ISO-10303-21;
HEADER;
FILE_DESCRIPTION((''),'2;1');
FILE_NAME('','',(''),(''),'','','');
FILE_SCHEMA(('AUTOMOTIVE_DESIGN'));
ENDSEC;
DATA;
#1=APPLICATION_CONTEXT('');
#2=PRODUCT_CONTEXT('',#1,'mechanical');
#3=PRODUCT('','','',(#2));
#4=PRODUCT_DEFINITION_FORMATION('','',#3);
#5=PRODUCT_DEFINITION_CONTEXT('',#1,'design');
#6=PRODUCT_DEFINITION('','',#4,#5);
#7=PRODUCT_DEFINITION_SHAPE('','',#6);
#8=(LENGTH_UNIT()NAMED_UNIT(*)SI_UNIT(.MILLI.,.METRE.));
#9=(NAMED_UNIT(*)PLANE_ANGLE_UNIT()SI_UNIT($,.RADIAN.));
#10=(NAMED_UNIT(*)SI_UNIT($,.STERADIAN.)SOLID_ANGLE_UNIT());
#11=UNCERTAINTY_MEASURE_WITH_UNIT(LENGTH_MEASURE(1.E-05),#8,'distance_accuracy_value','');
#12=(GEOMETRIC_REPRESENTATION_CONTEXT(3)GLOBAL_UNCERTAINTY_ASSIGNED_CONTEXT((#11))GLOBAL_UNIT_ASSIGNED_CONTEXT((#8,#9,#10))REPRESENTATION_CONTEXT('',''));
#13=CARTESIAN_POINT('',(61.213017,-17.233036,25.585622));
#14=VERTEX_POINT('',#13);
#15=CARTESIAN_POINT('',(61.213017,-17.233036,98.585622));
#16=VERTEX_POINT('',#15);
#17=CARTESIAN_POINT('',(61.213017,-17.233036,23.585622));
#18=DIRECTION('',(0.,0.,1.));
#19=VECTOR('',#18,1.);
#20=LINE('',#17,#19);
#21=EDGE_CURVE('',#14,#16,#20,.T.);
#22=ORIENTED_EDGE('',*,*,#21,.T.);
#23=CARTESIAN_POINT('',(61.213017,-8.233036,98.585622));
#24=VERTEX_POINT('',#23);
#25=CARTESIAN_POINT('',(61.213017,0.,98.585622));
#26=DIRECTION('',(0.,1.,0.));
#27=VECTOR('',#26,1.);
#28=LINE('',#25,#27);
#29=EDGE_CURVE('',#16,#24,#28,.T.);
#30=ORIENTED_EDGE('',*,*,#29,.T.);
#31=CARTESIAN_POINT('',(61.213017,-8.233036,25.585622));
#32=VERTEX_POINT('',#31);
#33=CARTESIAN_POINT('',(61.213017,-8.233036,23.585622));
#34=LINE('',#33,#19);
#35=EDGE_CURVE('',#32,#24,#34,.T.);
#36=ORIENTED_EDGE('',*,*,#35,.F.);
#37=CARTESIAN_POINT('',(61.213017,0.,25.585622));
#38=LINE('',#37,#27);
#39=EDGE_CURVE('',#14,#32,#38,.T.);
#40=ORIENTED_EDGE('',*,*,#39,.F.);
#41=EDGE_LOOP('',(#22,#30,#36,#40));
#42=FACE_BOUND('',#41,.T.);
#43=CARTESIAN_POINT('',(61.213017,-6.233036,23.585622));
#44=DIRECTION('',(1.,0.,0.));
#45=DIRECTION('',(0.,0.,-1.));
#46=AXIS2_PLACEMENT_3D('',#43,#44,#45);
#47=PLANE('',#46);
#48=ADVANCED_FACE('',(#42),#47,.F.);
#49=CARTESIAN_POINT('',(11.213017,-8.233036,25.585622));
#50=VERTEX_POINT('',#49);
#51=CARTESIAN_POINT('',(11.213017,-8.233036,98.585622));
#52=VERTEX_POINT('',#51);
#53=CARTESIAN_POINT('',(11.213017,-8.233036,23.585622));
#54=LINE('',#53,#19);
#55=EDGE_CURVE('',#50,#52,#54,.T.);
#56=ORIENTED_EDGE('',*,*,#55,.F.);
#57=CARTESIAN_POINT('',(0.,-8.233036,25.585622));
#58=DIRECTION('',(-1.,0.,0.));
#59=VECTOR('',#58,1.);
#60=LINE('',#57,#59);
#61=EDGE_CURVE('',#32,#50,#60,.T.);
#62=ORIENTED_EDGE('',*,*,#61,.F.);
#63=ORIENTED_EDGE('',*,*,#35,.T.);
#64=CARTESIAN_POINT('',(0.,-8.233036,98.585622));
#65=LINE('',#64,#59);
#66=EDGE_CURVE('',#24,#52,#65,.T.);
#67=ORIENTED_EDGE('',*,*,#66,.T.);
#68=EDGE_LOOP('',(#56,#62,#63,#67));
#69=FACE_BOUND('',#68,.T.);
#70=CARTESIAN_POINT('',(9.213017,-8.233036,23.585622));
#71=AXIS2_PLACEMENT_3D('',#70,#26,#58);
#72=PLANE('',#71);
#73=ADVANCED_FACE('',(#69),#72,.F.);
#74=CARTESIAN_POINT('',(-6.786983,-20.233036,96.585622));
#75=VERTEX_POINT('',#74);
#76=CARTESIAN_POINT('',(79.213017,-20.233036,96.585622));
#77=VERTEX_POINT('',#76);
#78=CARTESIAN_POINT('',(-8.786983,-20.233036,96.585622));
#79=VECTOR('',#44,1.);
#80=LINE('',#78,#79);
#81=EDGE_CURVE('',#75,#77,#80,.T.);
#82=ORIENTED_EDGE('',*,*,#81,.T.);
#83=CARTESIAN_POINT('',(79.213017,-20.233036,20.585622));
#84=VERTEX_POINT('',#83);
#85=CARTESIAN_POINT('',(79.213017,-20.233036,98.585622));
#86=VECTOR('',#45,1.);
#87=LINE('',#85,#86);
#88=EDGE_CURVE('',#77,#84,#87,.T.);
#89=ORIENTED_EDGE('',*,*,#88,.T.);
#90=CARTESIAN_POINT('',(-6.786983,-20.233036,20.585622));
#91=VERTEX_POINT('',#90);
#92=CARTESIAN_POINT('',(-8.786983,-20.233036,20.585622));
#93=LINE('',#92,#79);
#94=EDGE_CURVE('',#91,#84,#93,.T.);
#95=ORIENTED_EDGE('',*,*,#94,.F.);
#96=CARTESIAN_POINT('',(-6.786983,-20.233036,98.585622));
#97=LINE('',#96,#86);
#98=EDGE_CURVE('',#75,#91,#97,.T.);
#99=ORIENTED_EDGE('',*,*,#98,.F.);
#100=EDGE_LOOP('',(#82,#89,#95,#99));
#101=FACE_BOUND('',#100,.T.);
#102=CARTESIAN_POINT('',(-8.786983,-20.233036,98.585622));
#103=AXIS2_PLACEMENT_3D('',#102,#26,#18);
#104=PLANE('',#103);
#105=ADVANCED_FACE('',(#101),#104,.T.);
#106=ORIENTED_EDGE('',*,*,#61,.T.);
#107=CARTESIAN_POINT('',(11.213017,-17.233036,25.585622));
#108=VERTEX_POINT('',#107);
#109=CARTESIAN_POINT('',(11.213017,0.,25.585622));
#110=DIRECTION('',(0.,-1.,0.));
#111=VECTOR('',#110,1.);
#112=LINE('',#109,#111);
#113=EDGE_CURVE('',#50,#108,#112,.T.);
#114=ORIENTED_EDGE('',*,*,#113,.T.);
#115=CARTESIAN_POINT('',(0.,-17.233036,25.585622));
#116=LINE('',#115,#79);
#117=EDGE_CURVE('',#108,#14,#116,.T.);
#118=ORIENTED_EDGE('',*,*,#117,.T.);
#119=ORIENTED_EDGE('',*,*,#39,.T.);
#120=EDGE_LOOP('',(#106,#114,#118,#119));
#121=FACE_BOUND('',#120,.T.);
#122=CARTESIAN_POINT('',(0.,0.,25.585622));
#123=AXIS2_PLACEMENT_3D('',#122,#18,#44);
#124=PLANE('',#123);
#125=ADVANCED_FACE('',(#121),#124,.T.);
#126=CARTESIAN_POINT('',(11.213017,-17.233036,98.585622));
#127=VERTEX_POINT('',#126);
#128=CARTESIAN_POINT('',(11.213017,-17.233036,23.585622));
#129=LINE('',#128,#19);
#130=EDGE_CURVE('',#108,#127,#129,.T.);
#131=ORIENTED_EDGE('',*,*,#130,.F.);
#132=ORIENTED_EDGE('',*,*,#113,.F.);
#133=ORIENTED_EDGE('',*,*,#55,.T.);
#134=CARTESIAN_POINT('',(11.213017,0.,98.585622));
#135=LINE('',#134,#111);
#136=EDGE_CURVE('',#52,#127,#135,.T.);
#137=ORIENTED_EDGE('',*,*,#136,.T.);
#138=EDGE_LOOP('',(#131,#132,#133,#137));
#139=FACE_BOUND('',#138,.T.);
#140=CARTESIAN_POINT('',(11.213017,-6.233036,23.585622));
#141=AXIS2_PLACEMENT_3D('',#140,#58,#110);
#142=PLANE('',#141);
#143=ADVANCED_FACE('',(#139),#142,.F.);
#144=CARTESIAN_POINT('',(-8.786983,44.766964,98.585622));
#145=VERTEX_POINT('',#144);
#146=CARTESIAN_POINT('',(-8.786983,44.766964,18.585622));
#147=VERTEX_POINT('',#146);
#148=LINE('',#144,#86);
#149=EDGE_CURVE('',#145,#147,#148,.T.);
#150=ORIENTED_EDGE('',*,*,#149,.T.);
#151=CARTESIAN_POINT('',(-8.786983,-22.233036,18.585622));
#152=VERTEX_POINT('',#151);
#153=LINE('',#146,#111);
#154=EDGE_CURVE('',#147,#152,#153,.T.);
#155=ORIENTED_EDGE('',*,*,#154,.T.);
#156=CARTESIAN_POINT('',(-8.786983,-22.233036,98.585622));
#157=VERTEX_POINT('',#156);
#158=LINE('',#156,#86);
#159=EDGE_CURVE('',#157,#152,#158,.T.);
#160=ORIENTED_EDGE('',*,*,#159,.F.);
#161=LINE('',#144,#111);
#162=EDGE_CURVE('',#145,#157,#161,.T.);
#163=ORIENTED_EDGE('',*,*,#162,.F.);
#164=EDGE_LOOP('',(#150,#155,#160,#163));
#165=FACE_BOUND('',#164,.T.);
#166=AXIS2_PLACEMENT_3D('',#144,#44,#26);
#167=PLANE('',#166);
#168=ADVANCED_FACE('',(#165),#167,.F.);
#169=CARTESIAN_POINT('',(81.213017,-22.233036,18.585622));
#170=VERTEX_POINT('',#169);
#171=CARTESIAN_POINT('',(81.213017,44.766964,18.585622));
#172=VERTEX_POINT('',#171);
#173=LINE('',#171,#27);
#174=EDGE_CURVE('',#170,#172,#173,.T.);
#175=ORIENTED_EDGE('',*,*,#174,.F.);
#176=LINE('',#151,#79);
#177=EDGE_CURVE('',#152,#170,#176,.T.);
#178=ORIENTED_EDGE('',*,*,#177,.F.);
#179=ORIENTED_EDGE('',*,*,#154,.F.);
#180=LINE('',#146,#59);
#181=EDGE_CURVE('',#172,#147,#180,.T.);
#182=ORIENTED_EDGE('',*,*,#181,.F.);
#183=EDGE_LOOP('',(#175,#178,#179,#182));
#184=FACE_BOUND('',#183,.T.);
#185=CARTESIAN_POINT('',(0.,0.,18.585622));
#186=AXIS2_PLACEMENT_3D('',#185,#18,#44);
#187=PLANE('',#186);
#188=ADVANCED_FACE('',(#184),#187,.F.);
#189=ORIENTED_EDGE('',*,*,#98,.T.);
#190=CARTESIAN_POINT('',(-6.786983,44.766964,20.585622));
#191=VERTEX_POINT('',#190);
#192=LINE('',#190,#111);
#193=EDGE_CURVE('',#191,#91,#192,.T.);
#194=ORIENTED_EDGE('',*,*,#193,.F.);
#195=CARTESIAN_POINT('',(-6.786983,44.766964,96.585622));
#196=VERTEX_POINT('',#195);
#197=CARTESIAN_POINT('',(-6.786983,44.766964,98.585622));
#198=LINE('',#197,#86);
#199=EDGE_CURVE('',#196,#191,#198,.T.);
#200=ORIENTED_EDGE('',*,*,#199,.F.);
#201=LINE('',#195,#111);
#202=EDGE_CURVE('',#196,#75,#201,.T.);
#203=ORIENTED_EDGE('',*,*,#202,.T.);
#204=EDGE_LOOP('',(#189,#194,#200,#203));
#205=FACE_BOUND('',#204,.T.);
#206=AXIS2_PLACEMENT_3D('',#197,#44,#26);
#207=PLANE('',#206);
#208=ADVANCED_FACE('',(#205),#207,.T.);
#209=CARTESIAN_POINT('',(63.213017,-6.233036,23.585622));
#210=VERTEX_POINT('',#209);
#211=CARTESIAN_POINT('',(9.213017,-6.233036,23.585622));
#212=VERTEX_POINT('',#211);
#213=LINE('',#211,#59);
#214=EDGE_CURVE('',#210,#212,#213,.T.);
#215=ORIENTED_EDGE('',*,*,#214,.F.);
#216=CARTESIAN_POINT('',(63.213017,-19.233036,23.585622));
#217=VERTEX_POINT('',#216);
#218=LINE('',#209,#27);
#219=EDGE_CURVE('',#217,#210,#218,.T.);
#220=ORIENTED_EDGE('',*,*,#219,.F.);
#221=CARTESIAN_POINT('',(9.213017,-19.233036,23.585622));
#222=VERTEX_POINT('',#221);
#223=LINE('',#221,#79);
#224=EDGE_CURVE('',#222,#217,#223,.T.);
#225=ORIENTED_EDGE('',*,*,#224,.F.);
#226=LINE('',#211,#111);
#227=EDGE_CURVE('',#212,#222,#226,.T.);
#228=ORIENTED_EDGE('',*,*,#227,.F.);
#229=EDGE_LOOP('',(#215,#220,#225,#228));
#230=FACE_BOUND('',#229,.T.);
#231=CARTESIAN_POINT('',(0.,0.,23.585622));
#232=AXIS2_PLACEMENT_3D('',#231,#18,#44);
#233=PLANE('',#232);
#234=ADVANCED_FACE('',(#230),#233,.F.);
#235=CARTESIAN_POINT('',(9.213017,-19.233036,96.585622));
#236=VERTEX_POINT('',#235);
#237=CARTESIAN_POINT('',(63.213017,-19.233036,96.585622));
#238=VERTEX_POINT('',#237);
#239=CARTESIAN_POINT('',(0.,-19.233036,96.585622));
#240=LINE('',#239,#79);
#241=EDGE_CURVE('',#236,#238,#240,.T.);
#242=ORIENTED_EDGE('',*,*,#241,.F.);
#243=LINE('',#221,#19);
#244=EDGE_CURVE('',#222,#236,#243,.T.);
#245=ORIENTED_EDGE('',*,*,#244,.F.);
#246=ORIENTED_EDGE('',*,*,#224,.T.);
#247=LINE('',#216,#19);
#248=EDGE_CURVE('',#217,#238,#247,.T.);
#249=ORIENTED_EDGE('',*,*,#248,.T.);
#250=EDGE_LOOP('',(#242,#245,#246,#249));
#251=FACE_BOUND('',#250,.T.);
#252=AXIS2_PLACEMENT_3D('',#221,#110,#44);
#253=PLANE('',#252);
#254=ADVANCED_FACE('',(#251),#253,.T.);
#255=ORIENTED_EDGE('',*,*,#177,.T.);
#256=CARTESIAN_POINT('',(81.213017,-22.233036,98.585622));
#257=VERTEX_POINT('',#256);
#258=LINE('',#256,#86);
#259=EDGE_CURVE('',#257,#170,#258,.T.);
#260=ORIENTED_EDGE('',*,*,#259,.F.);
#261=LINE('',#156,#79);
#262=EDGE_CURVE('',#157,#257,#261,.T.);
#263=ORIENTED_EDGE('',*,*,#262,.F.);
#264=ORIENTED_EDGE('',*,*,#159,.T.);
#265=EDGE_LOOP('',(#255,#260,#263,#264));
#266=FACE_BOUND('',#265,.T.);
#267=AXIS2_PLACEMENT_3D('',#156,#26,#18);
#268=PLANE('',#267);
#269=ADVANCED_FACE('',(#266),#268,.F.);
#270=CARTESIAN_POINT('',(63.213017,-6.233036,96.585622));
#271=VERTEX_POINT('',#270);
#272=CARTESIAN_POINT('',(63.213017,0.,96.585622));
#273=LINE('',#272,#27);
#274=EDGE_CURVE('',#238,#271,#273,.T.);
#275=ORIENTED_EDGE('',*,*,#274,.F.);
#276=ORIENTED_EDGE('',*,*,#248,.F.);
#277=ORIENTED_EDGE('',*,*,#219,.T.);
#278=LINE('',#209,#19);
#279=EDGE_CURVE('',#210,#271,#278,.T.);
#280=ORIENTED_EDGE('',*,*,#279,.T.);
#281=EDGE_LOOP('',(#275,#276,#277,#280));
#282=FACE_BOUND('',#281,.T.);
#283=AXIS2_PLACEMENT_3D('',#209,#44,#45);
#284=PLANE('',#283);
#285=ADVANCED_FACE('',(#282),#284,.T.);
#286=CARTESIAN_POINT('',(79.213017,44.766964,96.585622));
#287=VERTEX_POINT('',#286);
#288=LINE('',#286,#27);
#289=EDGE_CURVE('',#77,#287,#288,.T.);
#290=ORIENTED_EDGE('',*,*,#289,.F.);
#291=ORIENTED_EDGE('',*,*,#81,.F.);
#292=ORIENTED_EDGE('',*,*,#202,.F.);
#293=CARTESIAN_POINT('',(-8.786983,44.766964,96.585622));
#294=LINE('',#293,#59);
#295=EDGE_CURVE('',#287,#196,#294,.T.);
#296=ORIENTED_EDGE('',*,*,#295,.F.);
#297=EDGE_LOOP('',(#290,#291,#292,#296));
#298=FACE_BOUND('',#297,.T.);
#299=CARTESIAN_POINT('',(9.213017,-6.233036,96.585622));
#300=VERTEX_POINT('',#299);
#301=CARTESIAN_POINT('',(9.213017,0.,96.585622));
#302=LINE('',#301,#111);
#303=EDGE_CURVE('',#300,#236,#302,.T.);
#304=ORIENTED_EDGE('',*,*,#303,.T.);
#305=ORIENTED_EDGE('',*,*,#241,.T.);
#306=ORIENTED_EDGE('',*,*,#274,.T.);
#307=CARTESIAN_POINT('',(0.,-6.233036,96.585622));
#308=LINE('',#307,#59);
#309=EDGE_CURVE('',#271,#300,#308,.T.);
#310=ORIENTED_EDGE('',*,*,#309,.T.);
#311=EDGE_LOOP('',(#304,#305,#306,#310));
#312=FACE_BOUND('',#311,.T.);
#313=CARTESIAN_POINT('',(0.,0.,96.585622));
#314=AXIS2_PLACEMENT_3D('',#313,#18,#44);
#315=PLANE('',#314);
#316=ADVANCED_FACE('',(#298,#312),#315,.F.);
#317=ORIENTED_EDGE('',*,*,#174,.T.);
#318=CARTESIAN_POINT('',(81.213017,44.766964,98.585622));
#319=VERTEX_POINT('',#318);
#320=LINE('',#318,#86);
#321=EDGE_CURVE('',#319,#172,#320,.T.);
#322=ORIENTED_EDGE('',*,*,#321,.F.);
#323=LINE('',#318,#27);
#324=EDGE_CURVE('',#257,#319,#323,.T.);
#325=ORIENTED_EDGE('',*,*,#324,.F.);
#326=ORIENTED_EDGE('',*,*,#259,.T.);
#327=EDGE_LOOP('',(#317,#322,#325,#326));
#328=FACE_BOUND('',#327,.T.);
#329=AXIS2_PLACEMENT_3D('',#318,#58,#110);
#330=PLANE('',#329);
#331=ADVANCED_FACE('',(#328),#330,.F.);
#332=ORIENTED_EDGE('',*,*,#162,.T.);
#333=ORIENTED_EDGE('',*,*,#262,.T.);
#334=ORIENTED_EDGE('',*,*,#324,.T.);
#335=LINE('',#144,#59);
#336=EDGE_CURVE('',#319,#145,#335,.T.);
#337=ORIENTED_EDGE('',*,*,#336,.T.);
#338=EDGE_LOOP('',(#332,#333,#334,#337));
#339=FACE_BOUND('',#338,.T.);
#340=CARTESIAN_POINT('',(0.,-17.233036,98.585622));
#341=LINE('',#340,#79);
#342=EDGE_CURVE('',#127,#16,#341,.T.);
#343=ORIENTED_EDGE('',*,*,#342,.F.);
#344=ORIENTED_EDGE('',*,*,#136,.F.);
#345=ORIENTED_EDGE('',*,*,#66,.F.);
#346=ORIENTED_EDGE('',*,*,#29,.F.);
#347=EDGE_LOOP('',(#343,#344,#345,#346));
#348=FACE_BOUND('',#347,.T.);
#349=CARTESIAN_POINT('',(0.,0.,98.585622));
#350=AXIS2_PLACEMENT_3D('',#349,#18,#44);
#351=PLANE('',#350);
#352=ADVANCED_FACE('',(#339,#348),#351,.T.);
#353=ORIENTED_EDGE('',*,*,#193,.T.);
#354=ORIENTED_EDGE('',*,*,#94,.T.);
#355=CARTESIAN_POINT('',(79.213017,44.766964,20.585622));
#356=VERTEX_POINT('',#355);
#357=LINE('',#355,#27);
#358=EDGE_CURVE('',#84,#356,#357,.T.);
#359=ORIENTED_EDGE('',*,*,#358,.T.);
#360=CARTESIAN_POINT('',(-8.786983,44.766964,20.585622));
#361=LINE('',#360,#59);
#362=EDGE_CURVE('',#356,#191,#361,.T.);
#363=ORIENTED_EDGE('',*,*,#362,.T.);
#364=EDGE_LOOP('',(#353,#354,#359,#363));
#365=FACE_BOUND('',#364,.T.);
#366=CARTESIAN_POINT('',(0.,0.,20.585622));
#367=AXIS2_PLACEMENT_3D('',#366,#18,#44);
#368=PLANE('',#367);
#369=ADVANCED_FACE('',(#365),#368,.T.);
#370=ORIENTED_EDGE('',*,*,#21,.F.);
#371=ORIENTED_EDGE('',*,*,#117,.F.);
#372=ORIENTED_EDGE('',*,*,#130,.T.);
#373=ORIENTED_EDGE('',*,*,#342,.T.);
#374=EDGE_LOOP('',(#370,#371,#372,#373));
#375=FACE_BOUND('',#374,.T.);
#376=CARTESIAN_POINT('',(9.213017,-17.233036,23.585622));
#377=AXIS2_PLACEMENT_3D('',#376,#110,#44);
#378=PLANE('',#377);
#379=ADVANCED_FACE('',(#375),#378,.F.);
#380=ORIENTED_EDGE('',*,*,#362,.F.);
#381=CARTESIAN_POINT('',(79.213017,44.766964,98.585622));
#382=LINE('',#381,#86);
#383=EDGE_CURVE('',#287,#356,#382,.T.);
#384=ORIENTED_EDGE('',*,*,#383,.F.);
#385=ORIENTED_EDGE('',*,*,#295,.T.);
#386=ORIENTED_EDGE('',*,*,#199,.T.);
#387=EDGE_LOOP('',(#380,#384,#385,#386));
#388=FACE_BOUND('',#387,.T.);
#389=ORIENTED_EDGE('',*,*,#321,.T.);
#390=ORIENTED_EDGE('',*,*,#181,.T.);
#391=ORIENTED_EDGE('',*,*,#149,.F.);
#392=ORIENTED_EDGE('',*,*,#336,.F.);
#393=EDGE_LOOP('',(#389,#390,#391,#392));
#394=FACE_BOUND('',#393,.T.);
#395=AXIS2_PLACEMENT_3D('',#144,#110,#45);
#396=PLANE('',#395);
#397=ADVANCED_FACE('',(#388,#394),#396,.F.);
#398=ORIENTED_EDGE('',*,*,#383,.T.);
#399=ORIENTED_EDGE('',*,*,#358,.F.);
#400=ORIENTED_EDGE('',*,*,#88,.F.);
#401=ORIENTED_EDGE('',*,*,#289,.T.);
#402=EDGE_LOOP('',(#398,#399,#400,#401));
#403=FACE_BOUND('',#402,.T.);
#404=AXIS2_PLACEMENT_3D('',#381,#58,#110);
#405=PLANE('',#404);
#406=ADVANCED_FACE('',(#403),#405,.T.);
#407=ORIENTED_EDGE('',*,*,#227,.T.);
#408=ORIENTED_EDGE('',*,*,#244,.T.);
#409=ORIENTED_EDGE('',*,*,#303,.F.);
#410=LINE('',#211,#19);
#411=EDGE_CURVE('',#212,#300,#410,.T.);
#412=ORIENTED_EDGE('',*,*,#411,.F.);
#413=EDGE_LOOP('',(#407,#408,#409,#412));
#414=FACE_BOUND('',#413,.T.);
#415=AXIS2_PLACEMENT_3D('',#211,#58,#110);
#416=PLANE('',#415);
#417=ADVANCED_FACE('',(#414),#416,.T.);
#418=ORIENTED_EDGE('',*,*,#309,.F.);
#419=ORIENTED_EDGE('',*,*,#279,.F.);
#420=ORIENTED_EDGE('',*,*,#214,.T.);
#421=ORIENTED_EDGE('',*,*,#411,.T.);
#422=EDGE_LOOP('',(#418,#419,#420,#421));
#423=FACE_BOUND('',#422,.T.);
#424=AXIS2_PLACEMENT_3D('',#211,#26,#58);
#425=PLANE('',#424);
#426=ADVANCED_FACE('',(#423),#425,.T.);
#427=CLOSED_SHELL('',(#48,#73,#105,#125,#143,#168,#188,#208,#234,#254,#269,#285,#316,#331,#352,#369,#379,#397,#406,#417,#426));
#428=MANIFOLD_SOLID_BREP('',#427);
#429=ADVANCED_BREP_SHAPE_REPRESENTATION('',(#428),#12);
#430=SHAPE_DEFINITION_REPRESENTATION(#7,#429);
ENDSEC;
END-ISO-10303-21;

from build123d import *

# Parameters (mm, degrees)
SKETCH1_W           = 90
SKETCH1_H           = 67
BOSS_EXTRUDE1_DEPTH = 40
SHELL1_T            = -2
SKETCH2_W           = 50
SKETCH2_H           = 13
CUT_EXTRUDE4_DEPTH  = 40
SKETCH4_W           = 54
SKETCH4_H           = 13
BOSS_EXTRUDE2_DEPTH = 75
SHELL2_START        = 11.213016769
SHELL2_OUTLINE_W    = 9
SHELL2_OUTLINE_H    = 73
SHELL2_DEPTH        = 50


# Read off the part's stored shape, not the designer's step: Shell2
with BuildPart() as part:
    # Sketch1 → Boss-Extrude1 (new, symmetric)
    with BuildSketch(Plane.XY.offset(58.585622103)):
        with Locations((36.213016769, 11.266964079)):
            Rectangle(SKETCH1_W, SKETCH1_H)
    extrude(amount=BOSS_EXTRUDE1_DEPTH, both=True)

    # Shell1
    shell1_openings = [part.faces().sort_by_distance(p)[0] for p in [
        (36.213016769, 44.766964079, 58.585622103),
    ]]
    offset(amount=SHELL1_T, openings=shell1_openings, kind=Kind.INTERSECTION)

    # Sketch2 → Cut-Extrude4 (cut)
    with BuildSketch(Plane.XY.offset(98.585622103)):
        with Locations((36.213016769, -12.733035921)):
            Rectangle(SKETCH2_W, SKETCH2_H)
    extrude(amount=-CUT_EXTRUDE4_DEPTH, mode=Mode.SUBTRACT)

    # Sketch4 → Boss-Extrude2 (add)
    with BuildSketch(Plane.XY.offset(98.585622103)):
        with Locations((36.213016769, -12.733035921)):
            Rectangle(SKETCH4_W, SKETCH4_H)
    extrude(amount=-BOSS_EXTRUDE2_DEPTH)

    # Shell2 outline → Shell2 (cut)
    with BuildSketch(Plane.YZ.offset(SHELL2_START)):
        with Locations((-12.733035921, 62.085622103)):
            Rectangle(SHELL2_OUTLINE_W, SHELL2_OUTLINE_H)
    extrude(amount=SHELL2_DEPTH, mode=Mode.SUBTRACT)


solid = part.part
